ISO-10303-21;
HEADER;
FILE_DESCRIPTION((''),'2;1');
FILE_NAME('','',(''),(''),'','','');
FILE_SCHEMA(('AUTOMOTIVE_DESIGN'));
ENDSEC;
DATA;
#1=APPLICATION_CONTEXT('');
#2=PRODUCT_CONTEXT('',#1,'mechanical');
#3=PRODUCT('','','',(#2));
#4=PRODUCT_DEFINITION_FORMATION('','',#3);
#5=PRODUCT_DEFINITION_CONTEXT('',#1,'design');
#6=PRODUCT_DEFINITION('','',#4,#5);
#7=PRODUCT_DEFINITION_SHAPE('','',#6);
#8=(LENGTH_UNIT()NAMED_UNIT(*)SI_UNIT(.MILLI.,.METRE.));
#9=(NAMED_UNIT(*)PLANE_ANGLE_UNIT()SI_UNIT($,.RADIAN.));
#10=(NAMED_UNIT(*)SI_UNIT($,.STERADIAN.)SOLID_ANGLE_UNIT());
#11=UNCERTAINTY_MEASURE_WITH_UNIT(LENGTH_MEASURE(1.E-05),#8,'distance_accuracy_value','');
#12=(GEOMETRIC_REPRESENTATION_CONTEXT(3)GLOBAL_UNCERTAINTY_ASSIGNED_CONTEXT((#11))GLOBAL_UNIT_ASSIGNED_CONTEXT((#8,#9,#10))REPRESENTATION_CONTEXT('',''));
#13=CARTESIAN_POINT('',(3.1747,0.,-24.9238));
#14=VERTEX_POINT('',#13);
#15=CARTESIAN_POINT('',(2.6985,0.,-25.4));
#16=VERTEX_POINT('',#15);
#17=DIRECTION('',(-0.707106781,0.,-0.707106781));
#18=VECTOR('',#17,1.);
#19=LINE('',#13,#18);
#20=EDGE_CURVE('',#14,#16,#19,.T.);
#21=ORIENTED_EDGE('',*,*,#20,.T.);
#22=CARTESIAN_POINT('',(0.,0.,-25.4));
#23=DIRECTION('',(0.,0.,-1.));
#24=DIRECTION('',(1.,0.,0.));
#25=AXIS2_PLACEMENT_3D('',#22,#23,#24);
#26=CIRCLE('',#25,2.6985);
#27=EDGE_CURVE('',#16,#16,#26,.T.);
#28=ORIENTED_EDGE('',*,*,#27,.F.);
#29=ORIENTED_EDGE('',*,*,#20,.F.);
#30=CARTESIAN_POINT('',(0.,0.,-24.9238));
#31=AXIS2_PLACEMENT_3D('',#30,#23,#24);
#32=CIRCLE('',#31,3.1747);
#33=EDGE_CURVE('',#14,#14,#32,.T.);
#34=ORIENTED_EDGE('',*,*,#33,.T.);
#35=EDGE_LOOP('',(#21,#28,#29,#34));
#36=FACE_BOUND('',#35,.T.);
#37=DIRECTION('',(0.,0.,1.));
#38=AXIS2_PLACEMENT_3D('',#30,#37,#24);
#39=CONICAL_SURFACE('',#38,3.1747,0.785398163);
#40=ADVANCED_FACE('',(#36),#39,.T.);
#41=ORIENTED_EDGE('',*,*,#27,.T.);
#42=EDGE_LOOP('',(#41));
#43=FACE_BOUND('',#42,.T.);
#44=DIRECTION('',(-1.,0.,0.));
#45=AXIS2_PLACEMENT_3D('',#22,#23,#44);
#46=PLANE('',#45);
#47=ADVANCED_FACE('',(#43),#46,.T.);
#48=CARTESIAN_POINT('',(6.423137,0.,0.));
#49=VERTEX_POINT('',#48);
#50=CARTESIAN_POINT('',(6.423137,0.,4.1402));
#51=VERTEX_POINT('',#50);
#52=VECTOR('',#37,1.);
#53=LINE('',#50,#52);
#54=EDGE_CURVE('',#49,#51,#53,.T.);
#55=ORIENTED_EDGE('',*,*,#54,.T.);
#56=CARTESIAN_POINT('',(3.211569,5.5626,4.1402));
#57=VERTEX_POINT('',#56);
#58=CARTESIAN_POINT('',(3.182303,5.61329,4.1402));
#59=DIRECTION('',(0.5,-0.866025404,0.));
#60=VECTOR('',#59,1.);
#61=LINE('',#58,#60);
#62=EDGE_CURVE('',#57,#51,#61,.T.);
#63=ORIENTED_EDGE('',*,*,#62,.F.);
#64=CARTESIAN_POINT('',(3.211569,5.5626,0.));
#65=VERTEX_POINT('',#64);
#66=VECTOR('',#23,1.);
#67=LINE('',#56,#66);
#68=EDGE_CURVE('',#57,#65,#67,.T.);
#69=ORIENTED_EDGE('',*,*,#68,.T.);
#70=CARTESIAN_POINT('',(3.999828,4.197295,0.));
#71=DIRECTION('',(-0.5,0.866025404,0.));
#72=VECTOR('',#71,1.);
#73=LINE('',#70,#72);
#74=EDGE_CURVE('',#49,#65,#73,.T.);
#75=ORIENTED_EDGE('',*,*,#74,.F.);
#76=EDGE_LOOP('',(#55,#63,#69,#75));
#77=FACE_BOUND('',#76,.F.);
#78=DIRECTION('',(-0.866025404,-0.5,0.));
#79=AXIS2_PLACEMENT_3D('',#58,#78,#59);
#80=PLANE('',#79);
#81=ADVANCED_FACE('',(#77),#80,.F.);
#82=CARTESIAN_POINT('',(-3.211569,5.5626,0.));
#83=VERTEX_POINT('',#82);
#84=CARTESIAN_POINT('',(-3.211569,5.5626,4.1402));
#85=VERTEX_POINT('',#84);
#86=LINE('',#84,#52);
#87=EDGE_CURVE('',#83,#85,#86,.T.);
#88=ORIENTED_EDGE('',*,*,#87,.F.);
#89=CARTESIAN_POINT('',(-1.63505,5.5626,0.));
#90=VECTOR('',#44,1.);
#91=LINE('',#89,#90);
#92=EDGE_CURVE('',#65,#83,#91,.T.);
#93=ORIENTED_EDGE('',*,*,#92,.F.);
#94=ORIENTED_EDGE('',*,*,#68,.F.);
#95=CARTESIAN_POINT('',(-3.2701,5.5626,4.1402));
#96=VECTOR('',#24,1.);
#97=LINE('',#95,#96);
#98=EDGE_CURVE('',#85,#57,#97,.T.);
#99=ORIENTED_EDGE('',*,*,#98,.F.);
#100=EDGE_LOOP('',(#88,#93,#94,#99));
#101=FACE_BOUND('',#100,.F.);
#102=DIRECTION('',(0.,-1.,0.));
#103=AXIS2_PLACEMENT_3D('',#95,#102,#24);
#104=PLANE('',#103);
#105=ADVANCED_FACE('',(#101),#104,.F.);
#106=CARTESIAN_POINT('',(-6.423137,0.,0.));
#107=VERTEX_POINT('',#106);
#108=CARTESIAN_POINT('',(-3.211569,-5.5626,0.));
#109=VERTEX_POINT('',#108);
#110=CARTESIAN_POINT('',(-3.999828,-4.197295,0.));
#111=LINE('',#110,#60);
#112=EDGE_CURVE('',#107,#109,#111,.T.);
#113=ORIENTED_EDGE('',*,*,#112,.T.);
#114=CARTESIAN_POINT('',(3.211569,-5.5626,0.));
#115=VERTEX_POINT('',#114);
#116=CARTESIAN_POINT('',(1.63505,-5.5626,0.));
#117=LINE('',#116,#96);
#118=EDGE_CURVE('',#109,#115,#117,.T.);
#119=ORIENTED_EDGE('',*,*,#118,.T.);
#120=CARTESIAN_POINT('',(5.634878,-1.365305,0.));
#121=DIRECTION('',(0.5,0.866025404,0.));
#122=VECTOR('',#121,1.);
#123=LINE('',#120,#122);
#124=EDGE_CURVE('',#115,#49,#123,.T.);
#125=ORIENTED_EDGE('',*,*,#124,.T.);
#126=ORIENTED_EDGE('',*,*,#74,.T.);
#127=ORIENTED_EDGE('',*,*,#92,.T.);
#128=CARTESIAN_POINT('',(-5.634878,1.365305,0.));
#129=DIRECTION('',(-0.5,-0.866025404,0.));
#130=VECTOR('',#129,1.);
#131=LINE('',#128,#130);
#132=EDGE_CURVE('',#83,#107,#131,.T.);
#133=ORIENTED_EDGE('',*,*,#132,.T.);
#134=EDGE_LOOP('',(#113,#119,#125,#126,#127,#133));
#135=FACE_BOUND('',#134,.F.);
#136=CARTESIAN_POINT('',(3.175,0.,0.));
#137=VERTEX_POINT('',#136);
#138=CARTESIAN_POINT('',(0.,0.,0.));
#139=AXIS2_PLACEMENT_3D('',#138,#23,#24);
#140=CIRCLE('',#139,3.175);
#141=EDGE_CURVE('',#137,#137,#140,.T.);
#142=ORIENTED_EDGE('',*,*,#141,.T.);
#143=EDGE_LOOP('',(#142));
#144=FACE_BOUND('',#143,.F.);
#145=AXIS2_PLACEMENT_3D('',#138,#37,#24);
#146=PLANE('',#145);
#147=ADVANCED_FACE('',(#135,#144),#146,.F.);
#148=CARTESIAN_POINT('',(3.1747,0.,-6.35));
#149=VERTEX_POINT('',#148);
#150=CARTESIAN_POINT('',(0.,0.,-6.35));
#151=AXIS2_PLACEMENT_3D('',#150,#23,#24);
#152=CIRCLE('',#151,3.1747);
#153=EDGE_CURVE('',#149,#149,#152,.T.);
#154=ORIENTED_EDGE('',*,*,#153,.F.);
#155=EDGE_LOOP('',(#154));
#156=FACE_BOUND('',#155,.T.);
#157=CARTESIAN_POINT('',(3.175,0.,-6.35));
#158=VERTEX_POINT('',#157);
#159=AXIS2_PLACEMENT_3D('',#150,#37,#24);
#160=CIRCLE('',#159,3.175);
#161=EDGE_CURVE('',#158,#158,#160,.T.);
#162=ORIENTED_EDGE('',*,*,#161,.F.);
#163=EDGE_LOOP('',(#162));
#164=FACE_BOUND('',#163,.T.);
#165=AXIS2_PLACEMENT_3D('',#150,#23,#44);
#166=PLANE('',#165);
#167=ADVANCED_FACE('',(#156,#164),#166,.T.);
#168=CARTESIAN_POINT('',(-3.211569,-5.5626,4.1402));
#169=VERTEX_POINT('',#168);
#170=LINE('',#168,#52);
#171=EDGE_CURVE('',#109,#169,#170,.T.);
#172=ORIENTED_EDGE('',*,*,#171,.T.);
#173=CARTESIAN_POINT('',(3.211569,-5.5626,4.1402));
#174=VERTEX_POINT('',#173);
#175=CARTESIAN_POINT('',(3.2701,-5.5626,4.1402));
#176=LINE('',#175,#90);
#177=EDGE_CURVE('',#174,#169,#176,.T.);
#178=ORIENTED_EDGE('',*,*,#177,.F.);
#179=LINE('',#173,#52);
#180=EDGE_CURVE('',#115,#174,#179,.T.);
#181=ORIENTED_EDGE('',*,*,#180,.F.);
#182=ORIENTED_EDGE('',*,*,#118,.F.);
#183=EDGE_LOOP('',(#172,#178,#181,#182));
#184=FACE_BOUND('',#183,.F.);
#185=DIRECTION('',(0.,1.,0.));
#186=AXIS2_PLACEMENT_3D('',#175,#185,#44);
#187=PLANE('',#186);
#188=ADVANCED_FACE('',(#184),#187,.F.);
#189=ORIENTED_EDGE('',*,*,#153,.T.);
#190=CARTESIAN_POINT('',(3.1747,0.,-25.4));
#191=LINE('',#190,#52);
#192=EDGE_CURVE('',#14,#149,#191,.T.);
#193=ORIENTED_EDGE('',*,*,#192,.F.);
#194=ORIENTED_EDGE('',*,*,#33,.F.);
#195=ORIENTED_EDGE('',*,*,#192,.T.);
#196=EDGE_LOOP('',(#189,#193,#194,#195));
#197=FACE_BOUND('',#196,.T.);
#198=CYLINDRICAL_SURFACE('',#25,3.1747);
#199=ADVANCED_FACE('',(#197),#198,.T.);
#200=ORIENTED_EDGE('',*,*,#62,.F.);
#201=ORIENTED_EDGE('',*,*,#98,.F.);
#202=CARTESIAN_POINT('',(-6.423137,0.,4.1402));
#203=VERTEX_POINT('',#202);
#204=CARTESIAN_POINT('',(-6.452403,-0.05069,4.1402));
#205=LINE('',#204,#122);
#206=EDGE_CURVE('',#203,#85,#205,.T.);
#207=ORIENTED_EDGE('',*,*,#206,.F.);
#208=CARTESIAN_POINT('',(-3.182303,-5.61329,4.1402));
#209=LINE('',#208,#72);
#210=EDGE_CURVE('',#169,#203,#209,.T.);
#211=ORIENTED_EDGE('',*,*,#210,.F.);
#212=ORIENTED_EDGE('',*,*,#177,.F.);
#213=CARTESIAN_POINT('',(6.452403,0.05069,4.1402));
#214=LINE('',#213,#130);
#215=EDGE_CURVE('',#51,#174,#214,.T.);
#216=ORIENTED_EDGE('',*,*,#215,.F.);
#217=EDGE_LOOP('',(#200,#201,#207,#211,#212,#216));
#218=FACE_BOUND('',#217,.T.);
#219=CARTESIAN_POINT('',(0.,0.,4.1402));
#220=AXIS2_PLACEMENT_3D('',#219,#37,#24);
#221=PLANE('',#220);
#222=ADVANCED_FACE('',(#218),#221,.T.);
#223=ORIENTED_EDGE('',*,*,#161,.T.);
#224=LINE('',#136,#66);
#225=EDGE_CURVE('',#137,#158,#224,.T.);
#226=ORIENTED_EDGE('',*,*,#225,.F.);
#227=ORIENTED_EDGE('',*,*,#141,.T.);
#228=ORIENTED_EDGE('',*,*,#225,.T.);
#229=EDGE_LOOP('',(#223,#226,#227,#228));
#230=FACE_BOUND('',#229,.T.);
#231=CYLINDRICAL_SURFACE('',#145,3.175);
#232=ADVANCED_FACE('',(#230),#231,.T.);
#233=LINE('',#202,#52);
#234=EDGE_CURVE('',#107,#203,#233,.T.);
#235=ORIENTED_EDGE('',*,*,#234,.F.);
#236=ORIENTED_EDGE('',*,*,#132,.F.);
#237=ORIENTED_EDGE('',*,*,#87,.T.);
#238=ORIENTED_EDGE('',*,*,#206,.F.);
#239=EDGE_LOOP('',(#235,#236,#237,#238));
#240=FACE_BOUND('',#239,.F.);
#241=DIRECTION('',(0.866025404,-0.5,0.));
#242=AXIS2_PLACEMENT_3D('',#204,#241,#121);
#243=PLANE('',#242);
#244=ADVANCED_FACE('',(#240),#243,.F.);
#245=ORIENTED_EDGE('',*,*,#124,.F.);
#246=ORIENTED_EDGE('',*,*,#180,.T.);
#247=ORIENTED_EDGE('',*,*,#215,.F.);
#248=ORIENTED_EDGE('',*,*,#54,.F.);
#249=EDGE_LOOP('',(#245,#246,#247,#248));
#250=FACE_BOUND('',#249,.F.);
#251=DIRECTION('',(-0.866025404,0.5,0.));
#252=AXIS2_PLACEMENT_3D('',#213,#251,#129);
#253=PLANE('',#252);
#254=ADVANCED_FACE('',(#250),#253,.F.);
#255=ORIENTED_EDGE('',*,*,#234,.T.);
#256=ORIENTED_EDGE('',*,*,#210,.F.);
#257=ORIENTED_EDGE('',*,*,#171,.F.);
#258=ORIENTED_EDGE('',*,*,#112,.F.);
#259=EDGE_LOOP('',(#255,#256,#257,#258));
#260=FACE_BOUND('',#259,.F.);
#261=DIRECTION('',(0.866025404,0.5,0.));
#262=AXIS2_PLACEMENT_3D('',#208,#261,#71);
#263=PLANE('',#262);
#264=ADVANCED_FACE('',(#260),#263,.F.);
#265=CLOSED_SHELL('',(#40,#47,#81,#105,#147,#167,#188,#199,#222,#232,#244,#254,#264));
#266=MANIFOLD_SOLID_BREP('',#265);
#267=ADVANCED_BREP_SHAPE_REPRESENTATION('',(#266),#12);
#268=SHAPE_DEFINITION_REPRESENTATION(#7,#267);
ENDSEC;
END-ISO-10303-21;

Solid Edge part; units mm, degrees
sketch "Sketch1" plane through (0, 0, 0) normal (0, 0, 1) x (1, 0, 0)
  circle A0 centre (0, 0) radius 6.4526
  dimension "D1" = 12.9052
extrude "Protrusion1" add sketch "Sketch1" along normal blind 4.1402
sketch "Sketch2" plane through (0, 0, 0) normal (0, 0, -1) x (1, 0, 0)
  circle A0 centre (0, 0) radius 3.175
extrude "Protrusion2" add sketch "Sketch2" along normal blind 25.4
sketch "Sketch3" plane through (0, 0, -25.4) normal (0, 0, -1) x (1, 0, 0)
  circle A0 centre (0, 0) radius 3.1747
extrude "Cutout1" cut sketch "Sketch3" against normal blind 19.05 flip side to cut
chamfer "Chamfer_1" distance 0.4762 angle 45 1 edges at (-3.1747, 0, -25.4)
sketch "Sketch4" plane through (0, 0, 4.1402) normal (0, 0, 1) x (1, 0, 0)
  line L0 (-3.2701, 5.5626) -> (3.2701, 5.5626)
  dimension "D1" = 11.1252
extrude "Cutout2" cut sketch "Sketch4" against normal up to next material side at (0, 5.6126, 4.1402)
pattern_circular "Pattern1" count 6 over 360 about axis through (0, 0, 4.1402) along (0, 0, 1) of "Cutout2"
properties part number "24100374"
